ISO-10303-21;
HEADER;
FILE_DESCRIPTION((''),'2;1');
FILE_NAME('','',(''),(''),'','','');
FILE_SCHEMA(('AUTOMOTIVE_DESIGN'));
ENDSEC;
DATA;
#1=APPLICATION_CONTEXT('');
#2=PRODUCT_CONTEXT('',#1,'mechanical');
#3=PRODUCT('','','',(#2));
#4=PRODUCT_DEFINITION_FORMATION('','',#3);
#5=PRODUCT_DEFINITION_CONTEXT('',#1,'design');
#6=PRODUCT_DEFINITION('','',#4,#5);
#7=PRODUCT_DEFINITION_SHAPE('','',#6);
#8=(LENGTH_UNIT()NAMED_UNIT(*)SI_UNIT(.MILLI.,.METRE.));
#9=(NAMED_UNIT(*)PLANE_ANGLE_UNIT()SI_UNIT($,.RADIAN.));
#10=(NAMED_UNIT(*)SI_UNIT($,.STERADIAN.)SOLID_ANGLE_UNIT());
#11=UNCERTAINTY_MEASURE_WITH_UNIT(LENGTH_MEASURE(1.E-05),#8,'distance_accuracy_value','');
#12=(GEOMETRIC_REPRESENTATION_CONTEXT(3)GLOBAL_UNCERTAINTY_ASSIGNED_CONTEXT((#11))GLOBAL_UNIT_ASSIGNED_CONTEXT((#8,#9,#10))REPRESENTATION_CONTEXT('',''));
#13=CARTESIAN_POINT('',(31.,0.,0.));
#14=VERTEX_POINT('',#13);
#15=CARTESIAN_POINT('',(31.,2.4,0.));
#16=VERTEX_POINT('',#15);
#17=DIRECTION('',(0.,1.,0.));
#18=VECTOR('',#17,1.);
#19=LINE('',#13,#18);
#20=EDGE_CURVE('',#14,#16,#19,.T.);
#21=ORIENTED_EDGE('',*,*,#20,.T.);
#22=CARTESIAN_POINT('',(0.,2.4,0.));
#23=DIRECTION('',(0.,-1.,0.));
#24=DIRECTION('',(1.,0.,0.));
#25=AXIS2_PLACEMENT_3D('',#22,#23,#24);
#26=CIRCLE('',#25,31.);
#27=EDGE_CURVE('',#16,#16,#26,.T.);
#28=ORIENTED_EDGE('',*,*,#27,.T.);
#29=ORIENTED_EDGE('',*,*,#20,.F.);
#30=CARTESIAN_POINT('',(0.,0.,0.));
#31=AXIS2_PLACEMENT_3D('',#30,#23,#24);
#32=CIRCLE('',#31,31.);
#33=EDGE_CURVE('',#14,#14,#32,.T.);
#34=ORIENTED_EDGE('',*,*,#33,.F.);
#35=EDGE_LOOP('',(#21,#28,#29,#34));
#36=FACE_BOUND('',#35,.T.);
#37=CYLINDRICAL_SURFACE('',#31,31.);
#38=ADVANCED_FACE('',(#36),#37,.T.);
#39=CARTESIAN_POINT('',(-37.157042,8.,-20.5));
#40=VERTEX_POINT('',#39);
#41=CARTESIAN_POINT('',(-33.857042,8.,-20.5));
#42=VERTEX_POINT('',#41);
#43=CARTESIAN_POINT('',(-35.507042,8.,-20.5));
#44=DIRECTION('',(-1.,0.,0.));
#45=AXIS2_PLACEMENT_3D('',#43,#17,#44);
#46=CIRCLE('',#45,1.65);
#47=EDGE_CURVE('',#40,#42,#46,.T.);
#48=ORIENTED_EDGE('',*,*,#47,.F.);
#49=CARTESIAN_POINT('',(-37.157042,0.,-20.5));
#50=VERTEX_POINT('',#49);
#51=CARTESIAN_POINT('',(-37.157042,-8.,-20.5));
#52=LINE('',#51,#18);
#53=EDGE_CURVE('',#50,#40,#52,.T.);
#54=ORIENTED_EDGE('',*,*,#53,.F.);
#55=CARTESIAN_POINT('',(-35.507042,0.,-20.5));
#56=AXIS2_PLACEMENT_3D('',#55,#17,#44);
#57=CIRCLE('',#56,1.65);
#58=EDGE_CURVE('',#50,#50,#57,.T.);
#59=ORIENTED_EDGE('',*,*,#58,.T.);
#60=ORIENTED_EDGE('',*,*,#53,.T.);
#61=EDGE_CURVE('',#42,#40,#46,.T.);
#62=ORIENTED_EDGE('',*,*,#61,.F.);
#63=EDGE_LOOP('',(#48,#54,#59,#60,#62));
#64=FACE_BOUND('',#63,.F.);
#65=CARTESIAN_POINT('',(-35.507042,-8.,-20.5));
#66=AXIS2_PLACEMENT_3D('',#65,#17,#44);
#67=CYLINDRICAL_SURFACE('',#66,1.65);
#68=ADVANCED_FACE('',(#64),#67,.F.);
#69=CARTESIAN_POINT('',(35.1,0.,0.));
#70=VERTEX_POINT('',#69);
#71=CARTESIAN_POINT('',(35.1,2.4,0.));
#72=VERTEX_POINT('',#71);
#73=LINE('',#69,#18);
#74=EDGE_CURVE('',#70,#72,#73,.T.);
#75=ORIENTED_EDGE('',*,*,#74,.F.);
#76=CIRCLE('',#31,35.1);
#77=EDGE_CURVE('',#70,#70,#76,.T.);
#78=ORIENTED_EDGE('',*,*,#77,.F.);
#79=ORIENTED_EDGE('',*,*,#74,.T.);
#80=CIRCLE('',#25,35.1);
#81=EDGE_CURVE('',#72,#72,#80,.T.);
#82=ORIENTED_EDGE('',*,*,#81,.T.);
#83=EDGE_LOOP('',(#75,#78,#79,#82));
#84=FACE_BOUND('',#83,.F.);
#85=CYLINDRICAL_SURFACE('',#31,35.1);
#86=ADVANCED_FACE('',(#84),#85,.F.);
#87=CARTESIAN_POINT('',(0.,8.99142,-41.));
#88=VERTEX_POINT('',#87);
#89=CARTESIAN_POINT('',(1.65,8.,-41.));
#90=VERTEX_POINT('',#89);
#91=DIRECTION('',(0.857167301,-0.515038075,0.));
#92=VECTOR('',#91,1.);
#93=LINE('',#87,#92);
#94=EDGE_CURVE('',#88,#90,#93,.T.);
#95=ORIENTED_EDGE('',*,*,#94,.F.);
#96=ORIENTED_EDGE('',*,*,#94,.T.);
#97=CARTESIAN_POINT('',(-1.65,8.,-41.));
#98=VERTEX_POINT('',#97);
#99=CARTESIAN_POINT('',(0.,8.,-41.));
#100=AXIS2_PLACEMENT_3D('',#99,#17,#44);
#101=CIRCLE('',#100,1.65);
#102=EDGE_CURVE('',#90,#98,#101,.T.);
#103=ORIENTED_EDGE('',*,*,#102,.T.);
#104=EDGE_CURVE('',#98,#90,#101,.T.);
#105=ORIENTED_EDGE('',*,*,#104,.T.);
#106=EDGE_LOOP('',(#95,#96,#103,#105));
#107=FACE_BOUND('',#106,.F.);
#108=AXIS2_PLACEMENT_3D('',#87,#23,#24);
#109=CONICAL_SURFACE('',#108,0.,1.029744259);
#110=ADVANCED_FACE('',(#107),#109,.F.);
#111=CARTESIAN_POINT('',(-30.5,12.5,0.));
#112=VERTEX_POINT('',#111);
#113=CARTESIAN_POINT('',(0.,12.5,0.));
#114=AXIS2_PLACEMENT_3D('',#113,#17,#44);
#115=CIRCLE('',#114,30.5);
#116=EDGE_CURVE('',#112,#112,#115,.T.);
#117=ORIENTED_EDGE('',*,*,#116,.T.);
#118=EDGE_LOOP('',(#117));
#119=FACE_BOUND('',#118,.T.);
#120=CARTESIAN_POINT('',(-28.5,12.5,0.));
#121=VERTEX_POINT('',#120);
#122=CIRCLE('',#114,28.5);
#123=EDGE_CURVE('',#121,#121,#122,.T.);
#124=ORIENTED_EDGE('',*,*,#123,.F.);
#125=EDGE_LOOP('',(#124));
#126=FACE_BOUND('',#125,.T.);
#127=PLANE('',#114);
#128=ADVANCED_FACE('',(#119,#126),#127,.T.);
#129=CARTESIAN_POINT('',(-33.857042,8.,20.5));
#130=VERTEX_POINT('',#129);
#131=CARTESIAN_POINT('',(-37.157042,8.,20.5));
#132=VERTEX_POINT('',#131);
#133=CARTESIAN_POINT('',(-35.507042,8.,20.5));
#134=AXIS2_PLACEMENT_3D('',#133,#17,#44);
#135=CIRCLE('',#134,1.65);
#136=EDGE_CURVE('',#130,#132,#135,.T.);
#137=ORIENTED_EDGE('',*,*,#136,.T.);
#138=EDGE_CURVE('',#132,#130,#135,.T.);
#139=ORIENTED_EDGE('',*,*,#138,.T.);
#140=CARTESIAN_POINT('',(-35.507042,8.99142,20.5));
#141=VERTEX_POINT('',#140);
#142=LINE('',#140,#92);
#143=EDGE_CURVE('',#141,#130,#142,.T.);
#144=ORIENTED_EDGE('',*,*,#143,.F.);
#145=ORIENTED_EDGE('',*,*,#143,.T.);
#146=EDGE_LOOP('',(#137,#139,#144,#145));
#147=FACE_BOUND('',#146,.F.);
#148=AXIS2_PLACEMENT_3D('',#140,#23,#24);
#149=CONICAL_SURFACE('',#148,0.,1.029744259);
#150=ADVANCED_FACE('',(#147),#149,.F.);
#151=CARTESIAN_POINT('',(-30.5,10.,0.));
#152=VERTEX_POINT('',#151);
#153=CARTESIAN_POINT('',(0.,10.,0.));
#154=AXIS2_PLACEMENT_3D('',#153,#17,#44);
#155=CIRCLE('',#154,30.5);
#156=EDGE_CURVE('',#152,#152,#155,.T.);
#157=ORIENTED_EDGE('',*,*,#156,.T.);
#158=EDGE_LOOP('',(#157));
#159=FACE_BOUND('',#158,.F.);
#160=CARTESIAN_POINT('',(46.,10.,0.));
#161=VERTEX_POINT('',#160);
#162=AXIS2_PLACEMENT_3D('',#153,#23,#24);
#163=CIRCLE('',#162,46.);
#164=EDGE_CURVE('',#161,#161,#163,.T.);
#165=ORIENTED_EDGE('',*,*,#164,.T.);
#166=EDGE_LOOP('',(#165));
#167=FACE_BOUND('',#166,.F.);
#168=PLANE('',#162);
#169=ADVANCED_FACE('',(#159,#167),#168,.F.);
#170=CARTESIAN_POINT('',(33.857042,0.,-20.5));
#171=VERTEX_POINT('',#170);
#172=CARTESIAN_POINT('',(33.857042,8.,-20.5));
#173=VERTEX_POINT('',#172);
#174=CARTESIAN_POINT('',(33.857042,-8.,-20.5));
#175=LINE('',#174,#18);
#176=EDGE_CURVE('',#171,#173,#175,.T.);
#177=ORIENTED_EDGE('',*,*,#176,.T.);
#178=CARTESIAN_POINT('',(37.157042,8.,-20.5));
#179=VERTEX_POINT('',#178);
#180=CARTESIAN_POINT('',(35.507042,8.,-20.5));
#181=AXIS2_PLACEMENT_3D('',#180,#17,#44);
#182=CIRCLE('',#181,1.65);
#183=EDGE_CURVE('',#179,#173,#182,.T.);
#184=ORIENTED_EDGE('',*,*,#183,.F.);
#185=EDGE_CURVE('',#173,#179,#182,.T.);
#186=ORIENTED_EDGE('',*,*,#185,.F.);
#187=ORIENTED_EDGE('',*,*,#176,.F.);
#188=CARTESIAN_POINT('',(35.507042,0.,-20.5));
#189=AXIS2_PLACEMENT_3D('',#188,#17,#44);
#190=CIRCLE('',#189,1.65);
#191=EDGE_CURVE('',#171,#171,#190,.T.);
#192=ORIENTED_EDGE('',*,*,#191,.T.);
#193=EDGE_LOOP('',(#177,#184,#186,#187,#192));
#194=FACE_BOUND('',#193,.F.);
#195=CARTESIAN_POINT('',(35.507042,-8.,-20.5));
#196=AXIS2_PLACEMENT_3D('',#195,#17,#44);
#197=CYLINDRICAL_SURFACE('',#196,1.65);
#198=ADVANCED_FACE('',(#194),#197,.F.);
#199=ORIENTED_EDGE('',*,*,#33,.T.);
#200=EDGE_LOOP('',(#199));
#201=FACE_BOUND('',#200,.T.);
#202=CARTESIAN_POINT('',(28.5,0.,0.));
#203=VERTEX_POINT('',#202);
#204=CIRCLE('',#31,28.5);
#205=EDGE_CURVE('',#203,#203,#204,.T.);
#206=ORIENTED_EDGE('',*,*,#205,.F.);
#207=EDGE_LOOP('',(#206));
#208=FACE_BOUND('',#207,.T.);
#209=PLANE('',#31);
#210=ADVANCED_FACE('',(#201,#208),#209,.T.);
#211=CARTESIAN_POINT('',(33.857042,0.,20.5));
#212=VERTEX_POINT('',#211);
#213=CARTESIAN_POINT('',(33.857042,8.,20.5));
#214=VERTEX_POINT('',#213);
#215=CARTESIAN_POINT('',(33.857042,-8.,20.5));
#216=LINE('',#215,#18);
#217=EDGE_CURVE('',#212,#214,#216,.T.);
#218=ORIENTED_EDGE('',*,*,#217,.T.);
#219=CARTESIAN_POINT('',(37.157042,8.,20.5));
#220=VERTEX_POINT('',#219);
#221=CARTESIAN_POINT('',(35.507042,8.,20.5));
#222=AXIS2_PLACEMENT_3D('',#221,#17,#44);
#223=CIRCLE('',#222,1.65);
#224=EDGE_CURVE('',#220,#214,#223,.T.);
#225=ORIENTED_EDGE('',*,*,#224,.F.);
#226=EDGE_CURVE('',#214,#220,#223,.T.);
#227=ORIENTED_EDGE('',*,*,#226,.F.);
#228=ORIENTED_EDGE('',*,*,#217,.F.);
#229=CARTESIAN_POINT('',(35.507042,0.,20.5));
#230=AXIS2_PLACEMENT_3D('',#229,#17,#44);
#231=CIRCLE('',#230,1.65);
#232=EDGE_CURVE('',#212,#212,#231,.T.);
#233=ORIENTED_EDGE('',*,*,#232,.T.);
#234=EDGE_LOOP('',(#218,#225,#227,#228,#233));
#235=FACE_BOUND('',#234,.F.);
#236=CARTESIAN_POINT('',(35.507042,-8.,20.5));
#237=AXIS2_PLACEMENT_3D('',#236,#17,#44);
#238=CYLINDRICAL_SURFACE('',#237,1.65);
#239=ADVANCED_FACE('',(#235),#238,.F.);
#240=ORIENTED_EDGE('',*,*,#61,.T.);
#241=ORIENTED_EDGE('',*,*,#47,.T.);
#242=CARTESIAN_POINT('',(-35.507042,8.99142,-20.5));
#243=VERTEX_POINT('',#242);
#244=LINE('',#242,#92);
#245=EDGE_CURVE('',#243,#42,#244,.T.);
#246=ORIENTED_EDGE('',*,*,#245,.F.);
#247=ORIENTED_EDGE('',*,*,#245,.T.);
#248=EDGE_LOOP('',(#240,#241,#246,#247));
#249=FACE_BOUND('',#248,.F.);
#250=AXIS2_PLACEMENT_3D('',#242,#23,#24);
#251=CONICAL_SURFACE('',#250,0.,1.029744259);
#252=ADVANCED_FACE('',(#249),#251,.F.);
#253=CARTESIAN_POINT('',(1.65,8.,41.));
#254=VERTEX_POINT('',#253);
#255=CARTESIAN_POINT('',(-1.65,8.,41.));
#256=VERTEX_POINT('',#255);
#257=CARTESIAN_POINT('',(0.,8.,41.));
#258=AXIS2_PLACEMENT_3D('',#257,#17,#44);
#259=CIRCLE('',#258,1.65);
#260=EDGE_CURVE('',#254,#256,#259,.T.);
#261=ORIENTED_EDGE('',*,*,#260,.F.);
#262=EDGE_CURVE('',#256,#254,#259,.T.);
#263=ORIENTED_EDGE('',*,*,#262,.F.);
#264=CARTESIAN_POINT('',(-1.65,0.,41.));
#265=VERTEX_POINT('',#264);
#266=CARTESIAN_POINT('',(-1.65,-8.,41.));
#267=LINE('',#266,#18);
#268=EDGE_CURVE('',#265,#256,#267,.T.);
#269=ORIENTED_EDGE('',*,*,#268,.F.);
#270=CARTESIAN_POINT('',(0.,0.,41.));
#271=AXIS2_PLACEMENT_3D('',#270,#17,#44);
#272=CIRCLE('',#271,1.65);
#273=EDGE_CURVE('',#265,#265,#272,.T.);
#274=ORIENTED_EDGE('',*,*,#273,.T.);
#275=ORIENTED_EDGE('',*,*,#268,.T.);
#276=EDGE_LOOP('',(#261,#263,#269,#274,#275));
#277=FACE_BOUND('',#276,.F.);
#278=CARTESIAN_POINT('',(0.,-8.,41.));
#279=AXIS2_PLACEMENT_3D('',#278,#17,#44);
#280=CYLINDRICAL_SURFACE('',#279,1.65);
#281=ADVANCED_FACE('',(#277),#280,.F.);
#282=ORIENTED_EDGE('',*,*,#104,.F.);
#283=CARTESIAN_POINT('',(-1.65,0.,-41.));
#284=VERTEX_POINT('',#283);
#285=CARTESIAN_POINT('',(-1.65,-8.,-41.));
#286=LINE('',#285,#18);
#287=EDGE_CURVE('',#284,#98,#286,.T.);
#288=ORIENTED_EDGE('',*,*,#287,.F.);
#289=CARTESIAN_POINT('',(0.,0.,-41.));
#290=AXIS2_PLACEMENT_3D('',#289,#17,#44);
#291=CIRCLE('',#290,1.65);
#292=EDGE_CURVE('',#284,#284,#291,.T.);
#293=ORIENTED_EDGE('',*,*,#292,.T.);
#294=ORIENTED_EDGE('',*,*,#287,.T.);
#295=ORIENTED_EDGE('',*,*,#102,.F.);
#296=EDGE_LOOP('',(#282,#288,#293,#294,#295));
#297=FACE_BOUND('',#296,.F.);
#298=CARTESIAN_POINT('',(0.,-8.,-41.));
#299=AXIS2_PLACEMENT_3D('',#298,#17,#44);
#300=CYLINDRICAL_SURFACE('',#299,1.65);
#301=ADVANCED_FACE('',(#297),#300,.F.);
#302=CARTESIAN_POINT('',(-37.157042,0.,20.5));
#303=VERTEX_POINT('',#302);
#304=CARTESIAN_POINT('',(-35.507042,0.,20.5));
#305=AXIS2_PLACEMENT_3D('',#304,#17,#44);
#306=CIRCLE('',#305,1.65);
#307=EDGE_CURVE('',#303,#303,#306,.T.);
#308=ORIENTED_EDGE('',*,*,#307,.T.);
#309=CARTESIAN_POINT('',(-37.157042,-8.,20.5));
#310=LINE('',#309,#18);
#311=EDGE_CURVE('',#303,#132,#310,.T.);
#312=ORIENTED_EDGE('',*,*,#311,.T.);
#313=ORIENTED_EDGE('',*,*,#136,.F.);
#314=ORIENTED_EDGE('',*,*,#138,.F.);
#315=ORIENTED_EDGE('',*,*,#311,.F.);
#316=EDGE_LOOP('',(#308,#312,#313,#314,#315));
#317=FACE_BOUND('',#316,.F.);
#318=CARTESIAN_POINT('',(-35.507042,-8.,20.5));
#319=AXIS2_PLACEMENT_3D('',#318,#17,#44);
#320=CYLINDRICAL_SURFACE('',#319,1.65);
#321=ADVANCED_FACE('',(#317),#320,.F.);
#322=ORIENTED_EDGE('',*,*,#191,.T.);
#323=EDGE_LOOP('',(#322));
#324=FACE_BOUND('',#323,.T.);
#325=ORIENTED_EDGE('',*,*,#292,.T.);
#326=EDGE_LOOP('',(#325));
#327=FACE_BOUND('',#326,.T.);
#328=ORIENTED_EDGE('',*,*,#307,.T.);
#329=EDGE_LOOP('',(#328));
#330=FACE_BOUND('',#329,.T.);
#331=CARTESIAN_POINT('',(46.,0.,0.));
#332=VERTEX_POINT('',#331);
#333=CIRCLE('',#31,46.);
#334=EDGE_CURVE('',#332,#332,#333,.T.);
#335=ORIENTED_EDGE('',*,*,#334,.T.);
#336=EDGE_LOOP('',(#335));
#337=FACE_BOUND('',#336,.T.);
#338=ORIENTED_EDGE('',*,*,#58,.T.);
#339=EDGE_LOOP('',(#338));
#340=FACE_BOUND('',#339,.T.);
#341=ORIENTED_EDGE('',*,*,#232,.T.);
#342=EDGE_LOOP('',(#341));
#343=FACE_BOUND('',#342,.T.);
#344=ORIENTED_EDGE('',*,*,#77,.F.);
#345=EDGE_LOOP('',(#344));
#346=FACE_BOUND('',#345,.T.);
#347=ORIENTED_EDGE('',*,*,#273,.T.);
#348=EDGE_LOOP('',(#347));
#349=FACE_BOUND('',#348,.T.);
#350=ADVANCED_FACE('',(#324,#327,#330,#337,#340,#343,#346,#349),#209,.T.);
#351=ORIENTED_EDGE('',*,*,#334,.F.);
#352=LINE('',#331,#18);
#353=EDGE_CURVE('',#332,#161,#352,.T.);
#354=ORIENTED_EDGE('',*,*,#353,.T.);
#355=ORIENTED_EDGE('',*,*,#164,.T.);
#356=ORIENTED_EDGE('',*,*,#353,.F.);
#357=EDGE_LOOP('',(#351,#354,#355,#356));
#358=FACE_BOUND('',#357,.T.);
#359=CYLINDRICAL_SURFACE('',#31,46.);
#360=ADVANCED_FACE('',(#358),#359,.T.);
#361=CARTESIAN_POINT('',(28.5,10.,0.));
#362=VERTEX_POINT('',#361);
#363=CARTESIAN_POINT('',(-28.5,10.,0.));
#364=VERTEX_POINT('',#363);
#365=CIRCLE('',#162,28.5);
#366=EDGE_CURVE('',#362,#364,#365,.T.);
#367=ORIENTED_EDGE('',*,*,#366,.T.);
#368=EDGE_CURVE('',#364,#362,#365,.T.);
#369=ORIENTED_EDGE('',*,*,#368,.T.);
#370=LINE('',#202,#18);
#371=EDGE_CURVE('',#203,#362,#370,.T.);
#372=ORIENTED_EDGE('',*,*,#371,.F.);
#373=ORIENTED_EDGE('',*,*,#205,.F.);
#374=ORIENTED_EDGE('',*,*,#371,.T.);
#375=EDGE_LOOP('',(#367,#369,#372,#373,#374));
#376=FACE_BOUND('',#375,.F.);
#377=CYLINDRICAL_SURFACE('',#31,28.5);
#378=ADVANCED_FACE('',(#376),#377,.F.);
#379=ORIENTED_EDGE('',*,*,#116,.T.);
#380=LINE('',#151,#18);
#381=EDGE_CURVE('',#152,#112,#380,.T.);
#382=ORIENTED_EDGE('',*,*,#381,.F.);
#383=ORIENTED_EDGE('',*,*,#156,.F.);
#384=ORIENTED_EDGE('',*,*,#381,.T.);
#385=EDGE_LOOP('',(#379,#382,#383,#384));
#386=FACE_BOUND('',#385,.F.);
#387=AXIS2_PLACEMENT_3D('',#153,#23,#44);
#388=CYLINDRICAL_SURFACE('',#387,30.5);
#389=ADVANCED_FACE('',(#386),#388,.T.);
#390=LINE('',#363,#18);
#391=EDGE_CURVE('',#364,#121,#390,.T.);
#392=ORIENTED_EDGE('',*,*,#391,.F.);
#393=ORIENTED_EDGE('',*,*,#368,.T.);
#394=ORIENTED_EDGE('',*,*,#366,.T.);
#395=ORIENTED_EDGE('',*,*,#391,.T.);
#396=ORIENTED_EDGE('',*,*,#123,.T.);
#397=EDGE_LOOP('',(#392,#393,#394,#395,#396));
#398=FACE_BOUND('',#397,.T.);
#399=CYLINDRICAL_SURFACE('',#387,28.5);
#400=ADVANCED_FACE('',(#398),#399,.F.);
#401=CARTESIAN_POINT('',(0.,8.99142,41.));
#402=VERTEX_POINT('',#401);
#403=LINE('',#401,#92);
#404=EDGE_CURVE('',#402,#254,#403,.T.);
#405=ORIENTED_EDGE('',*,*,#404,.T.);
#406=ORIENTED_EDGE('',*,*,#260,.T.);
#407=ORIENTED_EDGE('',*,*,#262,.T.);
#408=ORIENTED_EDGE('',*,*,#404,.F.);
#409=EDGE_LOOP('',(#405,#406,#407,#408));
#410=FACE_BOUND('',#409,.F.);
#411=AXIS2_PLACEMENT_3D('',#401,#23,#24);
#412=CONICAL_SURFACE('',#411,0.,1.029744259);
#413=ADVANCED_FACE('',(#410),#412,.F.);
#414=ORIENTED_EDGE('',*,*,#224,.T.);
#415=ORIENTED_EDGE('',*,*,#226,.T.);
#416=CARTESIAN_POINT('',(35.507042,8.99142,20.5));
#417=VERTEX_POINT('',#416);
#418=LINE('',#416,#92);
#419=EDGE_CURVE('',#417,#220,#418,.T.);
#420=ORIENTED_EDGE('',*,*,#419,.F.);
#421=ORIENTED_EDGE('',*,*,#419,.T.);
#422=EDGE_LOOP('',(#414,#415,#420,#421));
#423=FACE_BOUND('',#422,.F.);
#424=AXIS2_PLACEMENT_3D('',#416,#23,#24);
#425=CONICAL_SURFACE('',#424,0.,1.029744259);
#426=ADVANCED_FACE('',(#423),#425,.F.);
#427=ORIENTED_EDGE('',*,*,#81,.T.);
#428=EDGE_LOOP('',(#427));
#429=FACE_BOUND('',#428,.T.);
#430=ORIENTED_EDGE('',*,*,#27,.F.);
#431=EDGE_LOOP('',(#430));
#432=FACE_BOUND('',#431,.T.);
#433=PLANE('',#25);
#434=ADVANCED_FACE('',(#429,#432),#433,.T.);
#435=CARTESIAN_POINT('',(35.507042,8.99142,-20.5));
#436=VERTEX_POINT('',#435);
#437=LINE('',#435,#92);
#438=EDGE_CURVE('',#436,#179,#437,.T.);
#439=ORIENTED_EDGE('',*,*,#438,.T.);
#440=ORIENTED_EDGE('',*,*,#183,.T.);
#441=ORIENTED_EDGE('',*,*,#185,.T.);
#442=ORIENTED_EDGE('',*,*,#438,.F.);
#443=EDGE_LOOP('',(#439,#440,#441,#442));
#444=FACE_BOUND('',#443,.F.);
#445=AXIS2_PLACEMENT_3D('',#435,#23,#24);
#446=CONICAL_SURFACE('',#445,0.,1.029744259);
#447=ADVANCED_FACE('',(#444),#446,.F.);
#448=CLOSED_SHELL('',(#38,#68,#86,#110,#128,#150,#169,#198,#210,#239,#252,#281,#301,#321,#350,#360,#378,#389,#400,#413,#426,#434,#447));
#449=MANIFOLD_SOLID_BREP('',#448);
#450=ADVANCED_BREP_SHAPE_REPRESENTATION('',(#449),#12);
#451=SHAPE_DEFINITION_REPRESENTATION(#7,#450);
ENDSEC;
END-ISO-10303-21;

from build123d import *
from build123d import SkipClean  # not in build123d's __all__

# Parameters (mm, degrees)
F0_R     = 46
F0_R_2   = 28.5
F1_DEPTH = 10
F2_R     = 35.1
F2_R_2   = 31
F3_DEPTH = 2.4
F5_D     = 3.3
F5_DEPTH = 8
F5_TIP   = 0.9914200214
F6_R     = 30.5
F6_R_2   = 28.5
F7_DEPTH = 2.5


with BuildPart() as f1:
    # F0 (on Front) → F1 (new body)
    with BuildSketch(Plane.XZ):
        Circle(F0_R)
        Circle(F0_R_2, mode=Mode.SUBTRACT)
    extrude(amount=-F1_DEPTH)

    # F2 (on face) → F3 (cut)
    with BuildSketch(Plane.XZ):
        Circle(F2_R)
        Circle(F2_R_2, mode=Mode.SUBTRACT)
    extrude(amount=-F3_DEPTH, mode=Mode.SUBTRACT)

    # F5
    with Locations(Plane.XZ):
        with Locations((0, 41), (35.5070415552, 20.5), (35.5070415552, -20.5), (0, -41), (-35.5070415552, -20.5), (-35.5070415552, 20.5)):
            Hole(F5_D / 2, depth=F5_DEPTH)
            with Locations((0, 0, -(F5_DEPTH + F5_TIP / 2))):  # 118° drill point
                Cone(0, F5_D / 2, F5_TIP, mode=Mode.SUBTRACT)

    # F6 (on face) → F7 (join)
    with BuildSketch(Plane(origin=(0, 10, 0), x_dir=(-1, 0, 0), z_dir=(0, 1, 0))):
        Circle(F6_R)
        Circle(F6_R_2, mode=Mode.SUBTRACT)
    with SkipClean():  # cleaning this boolean's faces spoils the solid; the shape is the same uncleaned
        extrude(amount=F7_DEPTH)


solid = f1.part
